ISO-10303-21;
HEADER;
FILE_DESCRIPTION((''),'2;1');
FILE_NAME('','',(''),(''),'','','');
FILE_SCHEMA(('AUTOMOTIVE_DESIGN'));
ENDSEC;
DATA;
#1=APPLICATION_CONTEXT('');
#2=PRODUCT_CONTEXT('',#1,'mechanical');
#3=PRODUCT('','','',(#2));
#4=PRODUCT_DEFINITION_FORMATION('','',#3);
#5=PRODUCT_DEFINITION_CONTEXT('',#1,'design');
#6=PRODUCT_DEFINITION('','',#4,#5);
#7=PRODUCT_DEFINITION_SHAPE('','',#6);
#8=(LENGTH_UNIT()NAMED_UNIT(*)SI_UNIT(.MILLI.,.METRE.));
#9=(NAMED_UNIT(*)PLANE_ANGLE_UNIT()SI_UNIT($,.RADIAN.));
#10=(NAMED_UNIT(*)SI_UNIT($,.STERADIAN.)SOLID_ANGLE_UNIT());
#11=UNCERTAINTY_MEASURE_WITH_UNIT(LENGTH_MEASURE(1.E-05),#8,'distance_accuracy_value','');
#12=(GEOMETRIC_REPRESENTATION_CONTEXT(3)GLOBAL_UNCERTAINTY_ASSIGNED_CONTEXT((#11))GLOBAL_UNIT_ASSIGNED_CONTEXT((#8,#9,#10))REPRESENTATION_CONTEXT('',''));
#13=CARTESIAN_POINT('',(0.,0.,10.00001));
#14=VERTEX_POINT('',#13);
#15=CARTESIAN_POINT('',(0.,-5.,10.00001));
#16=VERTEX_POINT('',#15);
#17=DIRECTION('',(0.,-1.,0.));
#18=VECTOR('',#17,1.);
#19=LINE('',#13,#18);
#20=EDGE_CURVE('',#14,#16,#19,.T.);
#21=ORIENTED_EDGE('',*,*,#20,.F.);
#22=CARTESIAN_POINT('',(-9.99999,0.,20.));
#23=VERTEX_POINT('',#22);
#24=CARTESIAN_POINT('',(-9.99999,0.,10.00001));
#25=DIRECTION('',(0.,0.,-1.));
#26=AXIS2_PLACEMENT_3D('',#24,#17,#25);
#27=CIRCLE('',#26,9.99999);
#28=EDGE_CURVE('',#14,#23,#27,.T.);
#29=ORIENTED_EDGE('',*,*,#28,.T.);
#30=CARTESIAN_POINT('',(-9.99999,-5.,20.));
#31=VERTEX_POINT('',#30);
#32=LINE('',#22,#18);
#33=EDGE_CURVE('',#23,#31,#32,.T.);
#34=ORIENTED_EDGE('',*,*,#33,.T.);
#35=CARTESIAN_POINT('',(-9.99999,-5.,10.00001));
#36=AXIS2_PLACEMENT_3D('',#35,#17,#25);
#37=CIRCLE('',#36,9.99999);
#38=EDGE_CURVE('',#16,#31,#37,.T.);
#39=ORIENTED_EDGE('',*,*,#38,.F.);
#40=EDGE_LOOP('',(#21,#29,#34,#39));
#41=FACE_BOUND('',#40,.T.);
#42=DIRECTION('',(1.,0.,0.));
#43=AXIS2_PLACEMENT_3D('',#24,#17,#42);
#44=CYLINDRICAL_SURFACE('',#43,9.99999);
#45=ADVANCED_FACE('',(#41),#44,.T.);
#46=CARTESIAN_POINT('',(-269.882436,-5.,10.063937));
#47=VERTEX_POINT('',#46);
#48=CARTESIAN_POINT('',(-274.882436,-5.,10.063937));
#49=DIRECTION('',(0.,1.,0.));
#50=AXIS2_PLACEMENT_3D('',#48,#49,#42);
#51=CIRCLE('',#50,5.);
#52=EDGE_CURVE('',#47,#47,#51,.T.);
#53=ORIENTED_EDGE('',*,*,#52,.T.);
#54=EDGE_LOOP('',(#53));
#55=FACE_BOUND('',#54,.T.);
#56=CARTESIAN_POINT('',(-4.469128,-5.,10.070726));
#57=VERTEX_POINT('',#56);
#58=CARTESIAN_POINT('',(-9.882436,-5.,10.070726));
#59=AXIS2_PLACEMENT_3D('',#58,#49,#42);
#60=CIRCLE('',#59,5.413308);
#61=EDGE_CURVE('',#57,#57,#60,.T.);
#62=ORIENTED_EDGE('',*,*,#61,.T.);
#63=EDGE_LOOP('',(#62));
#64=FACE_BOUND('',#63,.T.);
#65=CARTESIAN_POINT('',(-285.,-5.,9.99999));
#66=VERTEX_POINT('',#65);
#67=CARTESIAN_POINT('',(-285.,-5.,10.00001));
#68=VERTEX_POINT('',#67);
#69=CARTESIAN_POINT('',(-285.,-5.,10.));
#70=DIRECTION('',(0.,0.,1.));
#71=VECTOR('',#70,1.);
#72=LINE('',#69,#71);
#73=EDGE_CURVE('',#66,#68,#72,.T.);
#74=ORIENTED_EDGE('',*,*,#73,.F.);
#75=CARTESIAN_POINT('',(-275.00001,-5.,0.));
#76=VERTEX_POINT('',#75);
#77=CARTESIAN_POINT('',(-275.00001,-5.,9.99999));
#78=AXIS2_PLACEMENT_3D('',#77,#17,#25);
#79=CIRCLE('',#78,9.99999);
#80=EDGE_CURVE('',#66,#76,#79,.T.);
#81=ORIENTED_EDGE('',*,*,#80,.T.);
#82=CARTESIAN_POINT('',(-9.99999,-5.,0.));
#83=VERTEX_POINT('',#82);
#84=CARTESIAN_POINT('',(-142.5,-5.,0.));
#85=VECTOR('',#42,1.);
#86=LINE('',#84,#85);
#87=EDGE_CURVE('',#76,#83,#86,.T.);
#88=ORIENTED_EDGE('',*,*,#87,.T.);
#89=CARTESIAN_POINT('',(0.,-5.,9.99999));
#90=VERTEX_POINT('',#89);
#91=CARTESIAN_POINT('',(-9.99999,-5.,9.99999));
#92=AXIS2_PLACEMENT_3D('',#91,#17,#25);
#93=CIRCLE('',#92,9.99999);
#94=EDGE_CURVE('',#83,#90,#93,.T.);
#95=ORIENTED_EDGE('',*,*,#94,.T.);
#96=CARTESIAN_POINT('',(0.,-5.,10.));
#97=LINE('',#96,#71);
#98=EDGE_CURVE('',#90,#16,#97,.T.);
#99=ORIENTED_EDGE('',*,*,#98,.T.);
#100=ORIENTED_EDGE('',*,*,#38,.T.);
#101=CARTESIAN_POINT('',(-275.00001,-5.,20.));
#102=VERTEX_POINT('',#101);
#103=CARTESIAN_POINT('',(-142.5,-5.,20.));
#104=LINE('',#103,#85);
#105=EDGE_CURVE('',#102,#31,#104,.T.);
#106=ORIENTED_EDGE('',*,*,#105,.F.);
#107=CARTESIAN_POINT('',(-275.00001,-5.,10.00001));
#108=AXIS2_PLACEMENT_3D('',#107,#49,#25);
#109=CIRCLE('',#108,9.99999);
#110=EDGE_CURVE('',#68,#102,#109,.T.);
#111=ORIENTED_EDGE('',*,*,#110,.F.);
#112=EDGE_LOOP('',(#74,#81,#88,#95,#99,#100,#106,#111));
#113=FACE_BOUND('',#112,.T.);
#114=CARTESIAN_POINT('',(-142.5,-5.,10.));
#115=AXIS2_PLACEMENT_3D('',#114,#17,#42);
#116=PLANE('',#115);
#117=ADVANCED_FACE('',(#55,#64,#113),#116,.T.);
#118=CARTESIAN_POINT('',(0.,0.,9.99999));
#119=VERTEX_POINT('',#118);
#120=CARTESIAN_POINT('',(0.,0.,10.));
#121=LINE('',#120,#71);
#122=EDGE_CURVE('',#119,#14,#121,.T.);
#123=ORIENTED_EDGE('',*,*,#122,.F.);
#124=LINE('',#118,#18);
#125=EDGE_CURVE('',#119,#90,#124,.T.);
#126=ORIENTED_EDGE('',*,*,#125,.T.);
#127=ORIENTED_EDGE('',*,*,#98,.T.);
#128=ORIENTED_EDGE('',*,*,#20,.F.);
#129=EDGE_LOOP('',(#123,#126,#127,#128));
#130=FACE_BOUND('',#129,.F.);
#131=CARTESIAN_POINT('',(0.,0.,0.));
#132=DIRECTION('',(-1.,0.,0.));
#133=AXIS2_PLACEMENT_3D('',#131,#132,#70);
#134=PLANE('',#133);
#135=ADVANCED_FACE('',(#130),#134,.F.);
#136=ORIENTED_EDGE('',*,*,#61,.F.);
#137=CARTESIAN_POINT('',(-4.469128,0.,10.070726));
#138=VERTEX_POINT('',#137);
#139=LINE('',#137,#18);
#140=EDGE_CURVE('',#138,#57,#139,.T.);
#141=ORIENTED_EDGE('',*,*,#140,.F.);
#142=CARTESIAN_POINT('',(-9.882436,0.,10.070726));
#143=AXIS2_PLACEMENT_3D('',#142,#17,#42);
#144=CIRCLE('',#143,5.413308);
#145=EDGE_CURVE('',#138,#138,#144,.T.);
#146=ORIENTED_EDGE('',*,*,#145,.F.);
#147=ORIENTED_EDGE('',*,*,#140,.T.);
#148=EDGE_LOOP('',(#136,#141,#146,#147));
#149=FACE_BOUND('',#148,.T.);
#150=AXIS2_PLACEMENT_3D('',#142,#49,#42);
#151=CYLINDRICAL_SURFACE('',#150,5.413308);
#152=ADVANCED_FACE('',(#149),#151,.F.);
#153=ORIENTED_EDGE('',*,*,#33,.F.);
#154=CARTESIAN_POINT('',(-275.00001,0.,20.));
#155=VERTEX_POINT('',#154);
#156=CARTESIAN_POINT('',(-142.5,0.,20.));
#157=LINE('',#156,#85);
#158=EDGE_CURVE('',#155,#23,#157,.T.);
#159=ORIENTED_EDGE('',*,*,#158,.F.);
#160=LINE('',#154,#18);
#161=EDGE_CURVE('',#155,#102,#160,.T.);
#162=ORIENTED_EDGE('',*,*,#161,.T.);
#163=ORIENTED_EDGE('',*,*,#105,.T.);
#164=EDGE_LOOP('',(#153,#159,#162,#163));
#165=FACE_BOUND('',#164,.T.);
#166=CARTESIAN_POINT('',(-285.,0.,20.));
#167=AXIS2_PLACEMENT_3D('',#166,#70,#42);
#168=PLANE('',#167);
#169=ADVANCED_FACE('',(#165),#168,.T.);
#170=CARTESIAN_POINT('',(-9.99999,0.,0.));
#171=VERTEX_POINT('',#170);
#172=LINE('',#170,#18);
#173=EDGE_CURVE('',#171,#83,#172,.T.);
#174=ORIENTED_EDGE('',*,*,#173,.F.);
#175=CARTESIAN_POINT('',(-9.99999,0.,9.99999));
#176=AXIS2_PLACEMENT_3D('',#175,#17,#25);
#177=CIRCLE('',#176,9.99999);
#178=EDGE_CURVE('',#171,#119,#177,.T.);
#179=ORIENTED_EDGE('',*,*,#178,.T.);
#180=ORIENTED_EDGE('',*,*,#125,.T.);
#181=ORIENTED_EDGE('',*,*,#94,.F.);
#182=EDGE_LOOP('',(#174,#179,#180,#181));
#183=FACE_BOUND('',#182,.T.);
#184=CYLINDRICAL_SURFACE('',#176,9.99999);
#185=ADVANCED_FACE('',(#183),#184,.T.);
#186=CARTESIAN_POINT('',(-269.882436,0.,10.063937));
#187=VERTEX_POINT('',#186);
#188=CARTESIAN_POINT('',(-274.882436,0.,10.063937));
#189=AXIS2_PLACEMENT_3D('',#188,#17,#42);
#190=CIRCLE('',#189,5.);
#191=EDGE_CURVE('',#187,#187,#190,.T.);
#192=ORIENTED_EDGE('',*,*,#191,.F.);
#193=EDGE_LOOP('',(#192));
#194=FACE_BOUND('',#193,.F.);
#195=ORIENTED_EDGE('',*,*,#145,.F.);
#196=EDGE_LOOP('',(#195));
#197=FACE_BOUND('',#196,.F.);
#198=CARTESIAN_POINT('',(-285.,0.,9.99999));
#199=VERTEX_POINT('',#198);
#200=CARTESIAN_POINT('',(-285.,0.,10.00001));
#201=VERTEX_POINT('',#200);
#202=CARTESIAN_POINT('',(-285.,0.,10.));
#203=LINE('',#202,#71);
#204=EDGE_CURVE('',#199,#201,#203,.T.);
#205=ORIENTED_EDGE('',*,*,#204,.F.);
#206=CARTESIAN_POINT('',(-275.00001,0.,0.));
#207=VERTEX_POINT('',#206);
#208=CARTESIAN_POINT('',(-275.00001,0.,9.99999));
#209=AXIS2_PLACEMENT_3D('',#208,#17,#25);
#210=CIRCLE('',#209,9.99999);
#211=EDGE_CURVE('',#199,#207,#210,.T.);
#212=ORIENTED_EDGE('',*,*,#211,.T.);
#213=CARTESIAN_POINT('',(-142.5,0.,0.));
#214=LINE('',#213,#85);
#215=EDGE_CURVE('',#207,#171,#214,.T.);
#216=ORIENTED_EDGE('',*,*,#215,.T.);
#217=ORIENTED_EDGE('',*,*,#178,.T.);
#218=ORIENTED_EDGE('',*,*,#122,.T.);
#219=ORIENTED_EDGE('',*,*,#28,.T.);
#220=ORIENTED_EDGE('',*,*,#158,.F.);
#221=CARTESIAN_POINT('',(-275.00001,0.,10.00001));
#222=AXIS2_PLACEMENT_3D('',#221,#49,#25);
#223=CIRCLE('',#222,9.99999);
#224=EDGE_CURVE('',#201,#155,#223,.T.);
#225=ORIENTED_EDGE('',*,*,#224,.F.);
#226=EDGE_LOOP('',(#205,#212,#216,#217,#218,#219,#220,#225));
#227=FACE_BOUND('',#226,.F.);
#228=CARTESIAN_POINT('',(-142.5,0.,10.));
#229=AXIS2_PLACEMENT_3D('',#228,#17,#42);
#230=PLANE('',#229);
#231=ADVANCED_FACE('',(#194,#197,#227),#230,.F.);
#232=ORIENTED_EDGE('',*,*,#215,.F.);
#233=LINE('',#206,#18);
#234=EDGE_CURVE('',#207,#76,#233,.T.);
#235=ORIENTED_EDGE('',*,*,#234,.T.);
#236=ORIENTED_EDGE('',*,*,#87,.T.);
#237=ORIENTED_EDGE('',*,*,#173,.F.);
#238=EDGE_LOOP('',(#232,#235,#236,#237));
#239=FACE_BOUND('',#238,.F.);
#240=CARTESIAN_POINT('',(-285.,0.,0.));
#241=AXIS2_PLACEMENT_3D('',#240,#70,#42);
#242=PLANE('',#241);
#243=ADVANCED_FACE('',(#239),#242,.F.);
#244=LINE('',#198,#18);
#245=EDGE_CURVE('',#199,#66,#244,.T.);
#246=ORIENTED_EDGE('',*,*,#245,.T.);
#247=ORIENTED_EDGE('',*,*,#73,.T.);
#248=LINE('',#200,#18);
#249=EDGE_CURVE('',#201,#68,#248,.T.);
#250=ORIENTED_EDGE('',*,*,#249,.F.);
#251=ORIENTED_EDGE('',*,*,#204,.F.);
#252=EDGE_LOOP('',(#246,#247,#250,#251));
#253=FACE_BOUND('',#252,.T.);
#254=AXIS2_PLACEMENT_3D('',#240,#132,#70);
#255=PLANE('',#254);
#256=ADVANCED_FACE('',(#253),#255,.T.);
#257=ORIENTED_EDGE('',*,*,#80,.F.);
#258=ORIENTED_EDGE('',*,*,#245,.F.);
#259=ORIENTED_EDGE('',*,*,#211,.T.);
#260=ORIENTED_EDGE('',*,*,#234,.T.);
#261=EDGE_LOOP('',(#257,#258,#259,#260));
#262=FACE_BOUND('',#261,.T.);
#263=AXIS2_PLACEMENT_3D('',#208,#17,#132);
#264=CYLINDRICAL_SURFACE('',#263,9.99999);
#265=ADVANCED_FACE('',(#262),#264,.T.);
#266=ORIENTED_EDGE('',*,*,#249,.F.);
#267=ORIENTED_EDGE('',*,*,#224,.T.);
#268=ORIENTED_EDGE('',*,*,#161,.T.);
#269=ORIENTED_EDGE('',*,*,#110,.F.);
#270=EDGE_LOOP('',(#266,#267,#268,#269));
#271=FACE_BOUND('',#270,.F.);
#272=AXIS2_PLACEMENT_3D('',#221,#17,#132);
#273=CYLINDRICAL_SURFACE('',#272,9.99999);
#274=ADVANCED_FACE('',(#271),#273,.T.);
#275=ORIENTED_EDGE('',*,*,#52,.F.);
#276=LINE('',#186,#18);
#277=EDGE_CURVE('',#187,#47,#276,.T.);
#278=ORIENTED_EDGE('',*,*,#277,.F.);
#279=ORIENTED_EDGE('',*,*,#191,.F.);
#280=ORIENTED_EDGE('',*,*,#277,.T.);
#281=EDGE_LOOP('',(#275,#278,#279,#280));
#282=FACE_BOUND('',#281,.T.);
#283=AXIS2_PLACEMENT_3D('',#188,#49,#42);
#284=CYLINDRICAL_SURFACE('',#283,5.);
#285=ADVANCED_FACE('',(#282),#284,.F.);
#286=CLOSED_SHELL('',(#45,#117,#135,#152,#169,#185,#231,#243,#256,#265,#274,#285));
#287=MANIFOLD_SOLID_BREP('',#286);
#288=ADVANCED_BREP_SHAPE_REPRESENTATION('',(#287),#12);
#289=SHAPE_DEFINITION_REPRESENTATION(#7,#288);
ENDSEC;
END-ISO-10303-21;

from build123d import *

# Parameters (mm, degrees)
F0_W     = 285
F0_H     = 20
F1_DEPTH = 5
F2_R     = 9.99999
F3_R     = 5
F3_R_2   = 5.4133078472
F4_DEPTH = 20


# Not quite as in the source:
# - a fillet or chamfer is up to 0.001 mm smaller than in the source, because OpenCascade refuses the exact size


with BuildPart() as f1:
    # F0 (on Front) → F1 (new body)
    with BuildSketch(Plane.XZ):
        with Locations((-142.5, 10)):
            Rectangle(F0_W, F0_H)
    extrude(amount=F1_DEPTH)

    # F2 (radius 10 in the source; OpenCascade refuses exactly that, so slightly less here)
    f2_edges = [f1.edges().sort_by_distance(p)[0] for p in [
        (0, -2.5, 20),
        (0, -2.5, 0),
        (-285, -2.5, 20),
        (-285, -2.5, 0),
    ]]
    fillet(f2_edges, radius=F2_R)

    # F3 (on Front) → F4 (cut)
    with BuildSketch(Plane.XZ):
        with Locations((-274.8824357986, 10.0639369339)):
            Circle(F3_R)
        with Locations((-9.8824357986, 10.070726499)):
            Circle(F3_R_2)
    extrude(amount=F4_DEPTH, mode=Mode.SUBTRACT)


solid = f1.part
